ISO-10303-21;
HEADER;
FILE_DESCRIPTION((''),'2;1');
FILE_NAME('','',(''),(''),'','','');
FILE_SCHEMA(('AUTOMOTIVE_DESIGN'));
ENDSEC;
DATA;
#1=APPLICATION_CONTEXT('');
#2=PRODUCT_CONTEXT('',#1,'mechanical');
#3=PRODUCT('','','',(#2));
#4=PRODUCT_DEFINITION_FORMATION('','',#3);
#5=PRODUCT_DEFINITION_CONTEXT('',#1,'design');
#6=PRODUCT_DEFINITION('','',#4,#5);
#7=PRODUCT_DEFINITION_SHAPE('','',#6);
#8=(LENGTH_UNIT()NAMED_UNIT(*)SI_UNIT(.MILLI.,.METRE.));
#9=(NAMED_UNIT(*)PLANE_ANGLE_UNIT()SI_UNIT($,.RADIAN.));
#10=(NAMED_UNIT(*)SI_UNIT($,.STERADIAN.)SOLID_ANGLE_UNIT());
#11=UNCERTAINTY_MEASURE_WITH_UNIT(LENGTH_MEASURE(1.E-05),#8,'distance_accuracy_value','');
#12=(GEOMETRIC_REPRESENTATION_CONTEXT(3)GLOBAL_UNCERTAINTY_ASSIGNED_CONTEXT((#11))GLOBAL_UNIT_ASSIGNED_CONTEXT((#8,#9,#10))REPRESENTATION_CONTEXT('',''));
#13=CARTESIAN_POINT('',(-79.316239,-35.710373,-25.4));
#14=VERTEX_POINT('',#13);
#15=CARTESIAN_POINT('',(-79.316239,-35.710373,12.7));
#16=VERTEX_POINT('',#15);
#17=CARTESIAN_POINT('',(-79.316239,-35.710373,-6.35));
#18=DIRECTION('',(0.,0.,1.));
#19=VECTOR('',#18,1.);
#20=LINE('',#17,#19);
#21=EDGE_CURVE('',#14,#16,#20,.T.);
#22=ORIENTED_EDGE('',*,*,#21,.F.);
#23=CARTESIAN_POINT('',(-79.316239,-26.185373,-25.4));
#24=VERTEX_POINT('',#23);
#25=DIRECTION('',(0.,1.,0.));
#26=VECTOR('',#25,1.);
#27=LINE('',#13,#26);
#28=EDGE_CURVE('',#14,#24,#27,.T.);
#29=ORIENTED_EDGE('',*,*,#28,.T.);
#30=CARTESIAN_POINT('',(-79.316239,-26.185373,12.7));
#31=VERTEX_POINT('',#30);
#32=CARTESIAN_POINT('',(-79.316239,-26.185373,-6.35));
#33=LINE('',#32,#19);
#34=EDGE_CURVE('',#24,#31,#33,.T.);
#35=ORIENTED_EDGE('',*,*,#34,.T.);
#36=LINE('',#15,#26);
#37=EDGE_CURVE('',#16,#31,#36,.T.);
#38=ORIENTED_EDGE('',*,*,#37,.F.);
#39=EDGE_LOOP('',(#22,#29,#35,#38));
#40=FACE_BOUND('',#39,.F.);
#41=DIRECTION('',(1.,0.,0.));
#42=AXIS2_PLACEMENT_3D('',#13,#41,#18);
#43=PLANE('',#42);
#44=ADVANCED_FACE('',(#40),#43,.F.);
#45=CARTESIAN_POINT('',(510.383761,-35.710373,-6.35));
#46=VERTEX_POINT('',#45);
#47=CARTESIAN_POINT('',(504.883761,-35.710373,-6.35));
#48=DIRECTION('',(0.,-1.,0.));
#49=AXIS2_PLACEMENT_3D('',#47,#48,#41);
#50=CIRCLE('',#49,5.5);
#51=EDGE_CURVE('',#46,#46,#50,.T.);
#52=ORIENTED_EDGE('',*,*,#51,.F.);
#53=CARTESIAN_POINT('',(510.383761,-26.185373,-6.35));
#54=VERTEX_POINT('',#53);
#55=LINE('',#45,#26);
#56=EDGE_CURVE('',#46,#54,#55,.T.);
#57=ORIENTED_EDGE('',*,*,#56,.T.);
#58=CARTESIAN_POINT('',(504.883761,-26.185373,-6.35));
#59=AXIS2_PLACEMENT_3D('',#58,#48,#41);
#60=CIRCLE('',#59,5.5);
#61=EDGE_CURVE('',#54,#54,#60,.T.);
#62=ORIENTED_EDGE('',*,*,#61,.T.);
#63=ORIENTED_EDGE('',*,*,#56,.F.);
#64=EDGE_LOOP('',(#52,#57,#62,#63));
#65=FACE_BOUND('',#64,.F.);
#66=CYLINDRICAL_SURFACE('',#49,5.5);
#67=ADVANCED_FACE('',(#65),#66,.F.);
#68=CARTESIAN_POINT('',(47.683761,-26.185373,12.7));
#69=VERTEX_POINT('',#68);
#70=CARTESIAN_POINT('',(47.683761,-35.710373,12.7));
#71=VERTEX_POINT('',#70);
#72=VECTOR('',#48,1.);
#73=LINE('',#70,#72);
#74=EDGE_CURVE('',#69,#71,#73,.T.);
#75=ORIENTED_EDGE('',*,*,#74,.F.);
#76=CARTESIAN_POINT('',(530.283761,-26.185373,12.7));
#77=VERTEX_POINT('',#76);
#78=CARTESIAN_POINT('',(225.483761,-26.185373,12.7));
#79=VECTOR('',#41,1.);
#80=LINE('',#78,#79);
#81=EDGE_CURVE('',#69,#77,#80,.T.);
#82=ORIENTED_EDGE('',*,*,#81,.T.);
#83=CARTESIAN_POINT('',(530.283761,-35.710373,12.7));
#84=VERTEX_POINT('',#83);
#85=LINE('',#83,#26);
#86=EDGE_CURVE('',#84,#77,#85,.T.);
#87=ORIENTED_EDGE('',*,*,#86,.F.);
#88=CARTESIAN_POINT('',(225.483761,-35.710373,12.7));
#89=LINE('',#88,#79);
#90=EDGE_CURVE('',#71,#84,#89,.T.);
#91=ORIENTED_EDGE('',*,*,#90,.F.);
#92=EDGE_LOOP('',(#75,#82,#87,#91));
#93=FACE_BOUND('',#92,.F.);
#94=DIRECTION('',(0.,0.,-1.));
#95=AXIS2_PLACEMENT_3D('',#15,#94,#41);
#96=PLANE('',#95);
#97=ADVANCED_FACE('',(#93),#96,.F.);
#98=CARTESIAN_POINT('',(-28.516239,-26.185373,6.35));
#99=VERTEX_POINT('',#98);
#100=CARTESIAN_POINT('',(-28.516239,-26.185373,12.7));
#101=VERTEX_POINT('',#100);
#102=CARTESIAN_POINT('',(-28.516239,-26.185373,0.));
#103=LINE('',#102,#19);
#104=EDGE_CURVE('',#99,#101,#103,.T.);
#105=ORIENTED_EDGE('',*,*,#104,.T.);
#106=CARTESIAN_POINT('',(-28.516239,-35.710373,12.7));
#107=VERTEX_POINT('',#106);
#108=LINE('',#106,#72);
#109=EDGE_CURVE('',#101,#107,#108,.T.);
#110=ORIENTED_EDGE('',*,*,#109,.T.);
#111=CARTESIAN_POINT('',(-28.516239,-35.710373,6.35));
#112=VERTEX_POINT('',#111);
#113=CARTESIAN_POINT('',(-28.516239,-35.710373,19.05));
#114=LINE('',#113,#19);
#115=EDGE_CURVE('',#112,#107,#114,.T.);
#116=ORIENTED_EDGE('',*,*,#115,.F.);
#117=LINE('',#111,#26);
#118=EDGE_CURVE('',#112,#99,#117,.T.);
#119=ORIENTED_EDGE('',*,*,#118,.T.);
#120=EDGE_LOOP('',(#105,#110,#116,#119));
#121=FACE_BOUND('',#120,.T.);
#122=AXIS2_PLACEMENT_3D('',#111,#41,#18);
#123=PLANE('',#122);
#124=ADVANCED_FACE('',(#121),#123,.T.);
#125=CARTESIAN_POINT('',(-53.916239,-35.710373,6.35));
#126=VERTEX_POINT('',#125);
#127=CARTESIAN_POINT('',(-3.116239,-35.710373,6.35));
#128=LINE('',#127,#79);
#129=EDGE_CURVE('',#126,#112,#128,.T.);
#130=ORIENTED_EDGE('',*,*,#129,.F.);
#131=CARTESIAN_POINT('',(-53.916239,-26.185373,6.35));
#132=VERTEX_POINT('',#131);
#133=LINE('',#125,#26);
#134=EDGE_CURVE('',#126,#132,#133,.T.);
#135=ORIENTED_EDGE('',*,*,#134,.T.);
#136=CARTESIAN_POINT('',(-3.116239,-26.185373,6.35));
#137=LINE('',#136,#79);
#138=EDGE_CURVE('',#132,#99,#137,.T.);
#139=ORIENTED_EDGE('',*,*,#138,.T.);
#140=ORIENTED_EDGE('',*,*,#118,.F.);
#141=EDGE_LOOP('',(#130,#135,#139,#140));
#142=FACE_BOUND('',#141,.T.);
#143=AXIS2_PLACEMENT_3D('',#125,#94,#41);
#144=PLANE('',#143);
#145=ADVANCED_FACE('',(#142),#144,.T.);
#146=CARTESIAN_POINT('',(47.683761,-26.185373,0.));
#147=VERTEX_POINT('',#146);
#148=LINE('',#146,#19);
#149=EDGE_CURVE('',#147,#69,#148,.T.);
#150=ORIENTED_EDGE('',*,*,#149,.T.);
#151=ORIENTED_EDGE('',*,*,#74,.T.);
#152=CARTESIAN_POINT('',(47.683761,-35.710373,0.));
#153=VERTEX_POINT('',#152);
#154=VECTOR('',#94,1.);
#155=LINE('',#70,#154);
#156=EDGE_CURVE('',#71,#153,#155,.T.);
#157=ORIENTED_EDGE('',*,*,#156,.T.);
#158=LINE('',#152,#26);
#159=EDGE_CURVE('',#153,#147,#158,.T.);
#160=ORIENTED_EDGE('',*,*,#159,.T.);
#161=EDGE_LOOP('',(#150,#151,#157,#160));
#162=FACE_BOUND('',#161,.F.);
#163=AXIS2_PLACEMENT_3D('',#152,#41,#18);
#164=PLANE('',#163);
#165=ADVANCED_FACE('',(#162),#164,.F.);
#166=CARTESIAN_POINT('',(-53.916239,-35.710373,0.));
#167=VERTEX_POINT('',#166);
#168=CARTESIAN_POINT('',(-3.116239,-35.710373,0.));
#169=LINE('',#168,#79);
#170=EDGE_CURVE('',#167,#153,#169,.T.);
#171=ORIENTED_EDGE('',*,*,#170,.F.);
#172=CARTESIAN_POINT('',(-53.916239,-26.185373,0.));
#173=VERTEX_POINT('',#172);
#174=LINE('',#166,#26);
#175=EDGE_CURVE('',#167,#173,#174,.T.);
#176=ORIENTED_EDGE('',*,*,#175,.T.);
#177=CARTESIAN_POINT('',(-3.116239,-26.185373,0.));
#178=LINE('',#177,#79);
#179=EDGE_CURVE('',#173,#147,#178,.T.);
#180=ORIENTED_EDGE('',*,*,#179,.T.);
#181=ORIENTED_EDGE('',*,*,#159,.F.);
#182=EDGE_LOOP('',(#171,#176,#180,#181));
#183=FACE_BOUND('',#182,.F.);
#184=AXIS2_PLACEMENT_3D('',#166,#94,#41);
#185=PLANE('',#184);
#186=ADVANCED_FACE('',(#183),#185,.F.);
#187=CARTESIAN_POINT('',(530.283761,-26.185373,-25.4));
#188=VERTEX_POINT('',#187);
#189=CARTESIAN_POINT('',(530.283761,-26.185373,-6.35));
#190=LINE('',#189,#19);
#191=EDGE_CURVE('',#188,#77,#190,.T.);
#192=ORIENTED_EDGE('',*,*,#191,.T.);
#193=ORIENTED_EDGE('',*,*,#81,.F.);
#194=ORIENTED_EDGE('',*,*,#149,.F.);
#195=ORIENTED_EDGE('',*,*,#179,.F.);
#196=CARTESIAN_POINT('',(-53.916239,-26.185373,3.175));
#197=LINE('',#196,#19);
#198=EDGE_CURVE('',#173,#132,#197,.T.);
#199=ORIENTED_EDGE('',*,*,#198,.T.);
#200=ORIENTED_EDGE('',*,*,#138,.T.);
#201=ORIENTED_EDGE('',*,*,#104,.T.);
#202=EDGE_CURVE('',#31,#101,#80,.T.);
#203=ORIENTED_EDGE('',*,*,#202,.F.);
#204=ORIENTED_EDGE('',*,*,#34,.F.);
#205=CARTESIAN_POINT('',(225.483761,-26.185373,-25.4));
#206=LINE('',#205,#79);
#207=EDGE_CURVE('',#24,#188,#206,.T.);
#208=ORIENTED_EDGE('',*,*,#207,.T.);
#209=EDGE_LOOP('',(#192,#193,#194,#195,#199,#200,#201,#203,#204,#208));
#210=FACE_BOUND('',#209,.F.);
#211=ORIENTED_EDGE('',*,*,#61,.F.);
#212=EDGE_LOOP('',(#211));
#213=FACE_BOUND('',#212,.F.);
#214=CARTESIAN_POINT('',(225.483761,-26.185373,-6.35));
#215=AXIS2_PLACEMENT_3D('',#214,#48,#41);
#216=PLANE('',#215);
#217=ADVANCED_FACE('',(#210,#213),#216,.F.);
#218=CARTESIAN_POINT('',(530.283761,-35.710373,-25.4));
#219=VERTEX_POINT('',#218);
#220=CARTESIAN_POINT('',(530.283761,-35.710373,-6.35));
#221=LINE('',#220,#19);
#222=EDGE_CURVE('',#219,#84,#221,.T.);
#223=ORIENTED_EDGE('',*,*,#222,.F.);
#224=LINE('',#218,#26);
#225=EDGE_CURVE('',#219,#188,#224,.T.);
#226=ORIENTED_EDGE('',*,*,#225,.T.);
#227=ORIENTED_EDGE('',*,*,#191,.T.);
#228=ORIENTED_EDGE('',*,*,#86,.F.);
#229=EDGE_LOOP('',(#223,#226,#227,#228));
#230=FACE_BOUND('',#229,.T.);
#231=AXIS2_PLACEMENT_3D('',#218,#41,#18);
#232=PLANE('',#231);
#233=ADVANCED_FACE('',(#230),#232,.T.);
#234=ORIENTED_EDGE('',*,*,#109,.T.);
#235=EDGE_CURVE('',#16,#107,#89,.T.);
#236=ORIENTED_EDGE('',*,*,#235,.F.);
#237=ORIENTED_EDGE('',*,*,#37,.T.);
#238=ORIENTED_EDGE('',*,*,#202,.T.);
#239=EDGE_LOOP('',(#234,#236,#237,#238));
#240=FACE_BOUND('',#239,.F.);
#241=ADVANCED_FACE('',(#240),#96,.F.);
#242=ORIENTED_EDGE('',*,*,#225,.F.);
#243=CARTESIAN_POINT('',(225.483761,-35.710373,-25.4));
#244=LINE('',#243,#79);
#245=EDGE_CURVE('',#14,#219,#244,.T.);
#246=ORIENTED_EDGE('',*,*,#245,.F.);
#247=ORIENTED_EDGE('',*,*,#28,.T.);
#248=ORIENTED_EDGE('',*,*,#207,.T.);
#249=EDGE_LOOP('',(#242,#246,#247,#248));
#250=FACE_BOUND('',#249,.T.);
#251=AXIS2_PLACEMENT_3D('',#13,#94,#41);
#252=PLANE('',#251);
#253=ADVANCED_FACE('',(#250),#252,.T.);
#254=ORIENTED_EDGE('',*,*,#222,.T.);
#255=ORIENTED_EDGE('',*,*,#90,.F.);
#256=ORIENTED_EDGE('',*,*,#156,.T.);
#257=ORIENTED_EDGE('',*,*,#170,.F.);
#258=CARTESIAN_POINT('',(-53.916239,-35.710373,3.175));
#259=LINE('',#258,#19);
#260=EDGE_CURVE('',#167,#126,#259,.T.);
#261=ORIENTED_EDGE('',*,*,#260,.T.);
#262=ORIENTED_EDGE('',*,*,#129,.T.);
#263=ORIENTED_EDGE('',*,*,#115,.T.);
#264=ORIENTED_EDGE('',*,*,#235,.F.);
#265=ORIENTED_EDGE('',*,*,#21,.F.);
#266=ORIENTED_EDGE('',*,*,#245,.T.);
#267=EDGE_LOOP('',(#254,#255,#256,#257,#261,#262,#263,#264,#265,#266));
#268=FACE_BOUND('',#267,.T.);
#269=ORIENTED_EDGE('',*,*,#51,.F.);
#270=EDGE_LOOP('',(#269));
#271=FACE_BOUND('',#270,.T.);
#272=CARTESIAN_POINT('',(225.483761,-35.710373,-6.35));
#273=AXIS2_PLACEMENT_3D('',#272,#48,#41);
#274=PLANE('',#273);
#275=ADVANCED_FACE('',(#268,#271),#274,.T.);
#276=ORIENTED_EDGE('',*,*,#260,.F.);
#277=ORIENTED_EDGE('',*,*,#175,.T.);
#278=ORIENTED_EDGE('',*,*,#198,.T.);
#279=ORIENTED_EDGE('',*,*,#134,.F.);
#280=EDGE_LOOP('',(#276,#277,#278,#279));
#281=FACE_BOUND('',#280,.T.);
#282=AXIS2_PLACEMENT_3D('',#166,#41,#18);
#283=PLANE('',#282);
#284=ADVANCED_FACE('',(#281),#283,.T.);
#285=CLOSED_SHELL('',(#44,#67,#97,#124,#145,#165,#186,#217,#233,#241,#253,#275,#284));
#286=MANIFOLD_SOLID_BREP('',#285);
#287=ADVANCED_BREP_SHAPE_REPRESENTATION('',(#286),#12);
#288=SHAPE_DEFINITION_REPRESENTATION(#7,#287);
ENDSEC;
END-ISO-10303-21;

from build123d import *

# Parameters (mm, degrees)
F0_W     = 101.6
F0_H     = 44.45
F1_DEPTH = 6.35
F2_W     = 609.6
F2_H     = 38.1
F2_W_2   = 101.6
F2_H_2   = 6.35
F3_DEPTH = 9.525
F4_DEPTH = 9.525
F6_W     = 76.2
F6_H     = 25.4
F7_DEPTH = 25.4
F8_R     = 5.5
F9_DEPTH = 25.4


# Not quite as in the source:
# - ends of sketch curves that miss each other by under 0.0002 mm in the source are joined


with BuildPart() as f1:
    # F0 (on Top) → F1 (new body)
    with BuildSketch(Plane.XY):
        with Locations((-3.1162388623, -13.4853734154)):
            Rectangle(F0_W, F0_H)
    extrude(amount=F1_DEPTH)

    # F2 (on face) → F4 (cut)
    with BuildSketch(Plane.XZ.offset(35.7103734154)):
        with Locations((-3.1162388623, 3.175)):
            Rectangle(F2_W_2, F2_H_2)
    extrude(amount=-F4_DEPTH, mode=Mode.SUBTRACT)


with BuildPart() as f3:
    # F2 (on face) → F3 (new body)
    with BuildSketch(Plane.XZ.offset(35.7103734154)):
        with Locations((225.4837611377, -6.35)):
            Rectangle(F2_W, F2_H)
        with Locations((-3.1162388623, 3.175)):
            Rectangle(F2_W_2, F2_H_2, mode=Mode.SUBTRACT)
    extrude(amount=-F3_DEPTH)

    # F6 (on face) → F7 (cut)
    with BuildSketch(Plane.XZ.offset(35.7103734154)):
        with Locations((9.5837611377, 19.05)):
            Rectangle(F6_W, F6_H)
    extrude(amount=-F7_DEPTH, mode=Mode.SUBTRACT)

    # F8 (on face) → F9 (cut)
    with BuildSketch(Plane.XZ.offset(35.7103734154)):
        with Locations((504.8837611377, -6.35)):
            Circle(F8_R)
    extrude(amount=-F9_DEPTH, mode=Mode.SUBTRACT)


solid = f3.part
